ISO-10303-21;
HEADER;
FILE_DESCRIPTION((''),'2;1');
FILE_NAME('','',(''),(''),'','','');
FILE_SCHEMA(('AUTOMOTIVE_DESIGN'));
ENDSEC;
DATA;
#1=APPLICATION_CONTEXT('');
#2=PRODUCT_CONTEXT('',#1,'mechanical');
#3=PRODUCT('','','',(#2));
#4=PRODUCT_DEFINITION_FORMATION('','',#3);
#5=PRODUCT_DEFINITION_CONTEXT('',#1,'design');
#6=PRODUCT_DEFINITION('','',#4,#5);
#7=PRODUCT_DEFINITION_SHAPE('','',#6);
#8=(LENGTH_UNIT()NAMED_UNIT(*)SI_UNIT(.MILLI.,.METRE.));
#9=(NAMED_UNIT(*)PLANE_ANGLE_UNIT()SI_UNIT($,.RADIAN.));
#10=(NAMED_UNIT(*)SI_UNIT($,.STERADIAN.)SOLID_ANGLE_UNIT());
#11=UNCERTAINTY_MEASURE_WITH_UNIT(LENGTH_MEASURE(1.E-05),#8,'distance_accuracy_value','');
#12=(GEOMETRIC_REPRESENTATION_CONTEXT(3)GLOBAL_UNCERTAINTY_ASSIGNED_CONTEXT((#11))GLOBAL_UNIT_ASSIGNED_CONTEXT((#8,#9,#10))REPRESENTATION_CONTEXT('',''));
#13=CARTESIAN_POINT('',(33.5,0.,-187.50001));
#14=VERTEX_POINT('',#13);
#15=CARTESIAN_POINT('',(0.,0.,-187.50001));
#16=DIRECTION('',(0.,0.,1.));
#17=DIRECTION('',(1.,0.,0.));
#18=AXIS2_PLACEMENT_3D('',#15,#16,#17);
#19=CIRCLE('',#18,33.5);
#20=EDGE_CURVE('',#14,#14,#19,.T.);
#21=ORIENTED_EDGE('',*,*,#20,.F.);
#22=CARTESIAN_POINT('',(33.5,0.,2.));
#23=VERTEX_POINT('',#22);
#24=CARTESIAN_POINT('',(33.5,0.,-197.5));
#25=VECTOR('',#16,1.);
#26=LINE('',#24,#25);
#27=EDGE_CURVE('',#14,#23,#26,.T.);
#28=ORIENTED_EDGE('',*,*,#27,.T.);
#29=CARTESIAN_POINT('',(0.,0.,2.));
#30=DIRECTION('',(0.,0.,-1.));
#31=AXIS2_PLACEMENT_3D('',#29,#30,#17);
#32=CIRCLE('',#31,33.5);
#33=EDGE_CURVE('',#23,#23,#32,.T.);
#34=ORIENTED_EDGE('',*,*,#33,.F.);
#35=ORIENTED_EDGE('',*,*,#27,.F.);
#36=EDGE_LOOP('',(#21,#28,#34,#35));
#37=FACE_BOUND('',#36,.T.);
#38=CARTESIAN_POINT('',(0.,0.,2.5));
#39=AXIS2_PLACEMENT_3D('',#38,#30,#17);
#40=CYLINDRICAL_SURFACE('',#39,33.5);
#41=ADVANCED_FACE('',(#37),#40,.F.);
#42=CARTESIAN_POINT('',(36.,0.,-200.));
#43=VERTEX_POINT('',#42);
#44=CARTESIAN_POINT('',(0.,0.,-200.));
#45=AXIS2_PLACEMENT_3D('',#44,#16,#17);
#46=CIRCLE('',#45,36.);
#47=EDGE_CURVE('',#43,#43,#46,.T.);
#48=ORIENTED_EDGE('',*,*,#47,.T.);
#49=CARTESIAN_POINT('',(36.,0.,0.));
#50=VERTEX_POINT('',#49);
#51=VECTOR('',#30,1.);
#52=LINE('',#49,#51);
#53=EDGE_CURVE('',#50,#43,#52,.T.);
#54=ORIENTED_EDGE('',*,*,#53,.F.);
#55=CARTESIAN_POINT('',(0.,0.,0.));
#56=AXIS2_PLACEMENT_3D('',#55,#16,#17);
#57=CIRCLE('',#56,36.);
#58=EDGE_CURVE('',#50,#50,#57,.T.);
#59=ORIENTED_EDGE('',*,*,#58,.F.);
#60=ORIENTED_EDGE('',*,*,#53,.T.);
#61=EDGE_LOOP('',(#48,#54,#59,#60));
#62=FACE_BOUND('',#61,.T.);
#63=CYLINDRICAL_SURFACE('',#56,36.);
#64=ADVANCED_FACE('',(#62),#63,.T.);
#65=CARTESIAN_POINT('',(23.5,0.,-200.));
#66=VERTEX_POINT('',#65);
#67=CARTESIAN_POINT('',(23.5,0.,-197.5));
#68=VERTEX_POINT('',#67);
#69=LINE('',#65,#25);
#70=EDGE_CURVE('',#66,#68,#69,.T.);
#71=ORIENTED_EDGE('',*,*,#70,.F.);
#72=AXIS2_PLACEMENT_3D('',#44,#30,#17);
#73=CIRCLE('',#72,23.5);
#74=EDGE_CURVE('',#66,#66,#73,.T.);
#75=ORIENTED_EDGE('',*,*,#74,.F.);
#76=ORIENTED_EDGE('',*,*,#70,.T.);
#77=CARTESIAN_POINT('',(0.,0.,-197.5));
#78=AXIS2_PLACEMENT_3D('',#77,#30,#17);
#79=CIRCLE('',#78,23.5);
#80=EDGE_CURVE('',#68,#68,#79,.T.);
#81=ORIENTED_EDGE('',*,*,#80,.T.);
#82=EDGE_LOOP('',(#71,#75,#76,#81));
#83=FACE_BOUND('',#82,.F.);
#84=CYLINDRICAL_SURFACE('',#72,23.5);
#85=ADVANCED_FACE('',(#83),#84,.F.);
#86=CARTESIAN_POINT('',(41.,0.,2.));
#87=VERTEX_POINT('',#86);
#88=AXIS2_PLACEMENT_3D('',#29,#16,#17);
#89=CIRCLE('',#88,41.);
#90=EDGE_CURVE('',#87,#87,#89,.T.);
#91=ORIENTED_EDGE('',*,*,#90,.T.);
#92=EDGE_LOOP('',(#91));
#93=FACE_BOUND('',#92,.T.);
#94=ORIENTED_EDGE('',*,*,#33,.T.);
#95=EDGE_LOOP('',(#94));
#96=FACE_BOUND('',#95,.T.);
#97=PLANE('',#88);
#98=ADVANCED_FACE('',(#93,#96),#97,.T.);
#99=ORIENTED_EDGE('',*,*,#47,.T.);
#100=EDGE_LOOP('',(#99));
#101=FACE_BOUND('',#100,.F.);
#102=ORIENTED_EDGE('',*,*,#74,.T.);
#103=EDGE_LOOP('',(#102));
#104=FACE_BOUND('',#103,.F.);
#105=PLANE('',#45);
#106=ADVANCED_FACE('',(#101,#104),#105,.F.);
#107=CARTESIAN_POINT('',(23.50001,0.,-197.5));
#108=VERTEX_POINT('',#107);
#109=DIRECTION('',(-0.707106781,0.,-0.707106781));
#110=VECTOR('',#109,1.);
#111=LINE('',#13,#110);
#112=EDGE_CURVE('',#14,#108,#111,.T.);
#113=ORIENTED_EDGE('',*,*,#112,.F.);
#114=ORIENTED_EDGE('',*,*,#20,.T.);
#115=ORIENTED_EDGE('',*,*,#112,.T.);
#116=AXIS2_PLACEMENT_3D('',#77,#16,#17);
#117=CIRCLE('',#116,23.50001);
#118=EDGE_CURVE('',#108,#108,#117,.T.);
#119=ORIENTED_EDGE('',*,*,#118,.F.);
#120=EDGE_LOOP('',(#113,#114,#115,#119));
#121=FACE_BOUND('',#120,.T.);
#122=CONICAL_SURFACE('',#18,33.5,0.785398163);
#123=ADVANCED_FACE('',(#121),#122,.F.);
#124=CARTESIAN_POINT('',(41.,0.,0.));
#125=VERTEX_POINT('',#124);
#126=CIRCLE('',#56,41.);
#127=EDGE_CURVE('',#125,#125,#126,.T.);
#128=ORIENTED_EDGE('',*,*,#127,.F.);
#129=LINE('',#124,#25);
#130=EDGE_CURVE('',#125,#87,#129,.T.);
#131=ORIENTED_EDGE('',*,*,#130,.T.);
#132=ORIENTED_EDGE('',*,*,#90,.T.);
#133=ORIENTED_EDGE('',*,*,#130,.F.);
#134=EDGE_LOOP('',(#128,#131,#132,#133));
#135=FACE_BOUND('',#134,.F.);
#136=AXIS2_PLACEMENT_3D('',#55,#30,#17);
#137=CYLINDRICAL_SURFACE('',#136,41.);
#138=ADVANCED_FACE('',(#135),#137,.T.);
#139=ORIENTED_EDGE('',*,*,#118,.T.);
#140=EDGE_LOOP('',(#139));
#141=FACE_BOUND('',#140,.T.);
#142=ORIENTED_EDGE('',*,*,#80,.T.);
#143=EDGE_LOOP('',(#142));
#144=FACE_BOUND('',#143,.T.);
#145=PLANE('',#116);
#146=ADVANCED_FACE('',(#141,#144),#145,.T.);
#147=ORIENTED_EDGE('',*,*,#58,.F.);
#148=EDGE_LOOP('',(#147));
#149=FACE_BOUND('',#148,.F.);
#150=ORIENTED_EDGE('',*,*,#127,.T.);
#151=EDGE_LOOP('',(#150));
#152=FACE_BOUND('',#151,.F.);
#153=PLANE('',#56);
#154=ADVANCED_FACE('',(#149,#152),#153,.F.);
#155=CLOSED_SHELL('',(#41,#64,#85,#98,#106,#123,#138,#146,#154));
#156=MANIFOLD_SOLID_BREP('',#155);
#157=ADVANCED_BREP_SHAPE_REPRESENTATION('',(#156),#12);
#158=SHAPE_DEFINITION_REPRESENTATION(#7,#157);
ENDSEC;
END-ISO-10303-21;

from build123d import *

# Parameters (mm, degrees)
F0_R     = 41
F0_R_2   = 36
F1_DEPTH = 2
F2_DEPTH = 200
F3_T     = 2.5
F5_R     = 23.5
F6_DEPTH = 25
F7_SIZE  = 9.99999


# Not quite as in the source:
# - a fillet or chamfer is up to 0.001 mm smaller than in the source, because OpenCascade refuses the exact size
# - a shell that OpenCascade refuses in one call is made with other operations: the cavity is built on its own and cut out


with BuildPart() as f1:
    # F0 (on Top) → F1 (new body)
    with BuildSketch(Plane.XY):
        Circle(F0_R)
        Circle(F0_R_2, mode=Mode.SUBTRACT)
        Circle(F0_R_2)
    extrude(amount=F1_DEPTH)

    # F0 (on Top) → F2 (join)
    with BuildSketch(Plane.XY):
        Circle(F0_R_2)
    extrude(amount=-F2_DEPTH)

    # F3: shell of thickness 2.5, made by hand


with BuildPart() as f3_core1:
    # F3_t2: copy of F1
    add(f1.part)

    # the walls: a layer under each face that stays
    f3_faces = [f3_core1.faces().sort_by_distance(p)[0] for p in [
        (-41, 0, 1),
        (-27.3333333333, -27.3333333333, 0),
        (-36, 0, -100),
        (0, 0, -200),
    ]]
    thicken(f3_faces, amount=-F3_T, mode=Mode.SUBTRACT)

    # F3_s3 → F3_t4 (revolve, cut)
    with BuildSketch(Plane.XZ):
        Polygon((36.025, -0.025), (36, 2.5), (33.5, 2.5), (33.5, 0), align=None)
    revolve(axis=Axis((0, 0, 0), (0, 0, 1)), mode=Mode.SUBTRACT)


with BuildPart() as f1_1:
    add(f1.part)

    # what is left inside the walls is the cavity
    f3_cavity = [f3_core1.part.solids().sort_by_distance(p)[0] for p in [
        (-33.475, 0, -64.5),
    ]]
    add(f3_cavity, mode=Mode.SUBTRACT)

    # F5 (on offset) → F6 (cut)
    with BuildSketch(Plane(origin=(0, 0, -200), x_dir=(1, 0, 0), z_dir=(0, 0, -1))):
        Circle(F5_R)
    extrude(amount=-F6_DEPTH, mode=Mode.SUBTRACT)

    # F7 (size 10 in the source; OpenCascade refuses exactly that, so slightly less here)
    f7_edges = [f1_1.edges().sort_by_distance(p)[0] for p in [
        (33.5, 0, -97.75),
        (-33.5, 0, -197.5),
    ]]
    chamfer(f7_edges, length=F7_SIZE)


solid = f1_1.part
